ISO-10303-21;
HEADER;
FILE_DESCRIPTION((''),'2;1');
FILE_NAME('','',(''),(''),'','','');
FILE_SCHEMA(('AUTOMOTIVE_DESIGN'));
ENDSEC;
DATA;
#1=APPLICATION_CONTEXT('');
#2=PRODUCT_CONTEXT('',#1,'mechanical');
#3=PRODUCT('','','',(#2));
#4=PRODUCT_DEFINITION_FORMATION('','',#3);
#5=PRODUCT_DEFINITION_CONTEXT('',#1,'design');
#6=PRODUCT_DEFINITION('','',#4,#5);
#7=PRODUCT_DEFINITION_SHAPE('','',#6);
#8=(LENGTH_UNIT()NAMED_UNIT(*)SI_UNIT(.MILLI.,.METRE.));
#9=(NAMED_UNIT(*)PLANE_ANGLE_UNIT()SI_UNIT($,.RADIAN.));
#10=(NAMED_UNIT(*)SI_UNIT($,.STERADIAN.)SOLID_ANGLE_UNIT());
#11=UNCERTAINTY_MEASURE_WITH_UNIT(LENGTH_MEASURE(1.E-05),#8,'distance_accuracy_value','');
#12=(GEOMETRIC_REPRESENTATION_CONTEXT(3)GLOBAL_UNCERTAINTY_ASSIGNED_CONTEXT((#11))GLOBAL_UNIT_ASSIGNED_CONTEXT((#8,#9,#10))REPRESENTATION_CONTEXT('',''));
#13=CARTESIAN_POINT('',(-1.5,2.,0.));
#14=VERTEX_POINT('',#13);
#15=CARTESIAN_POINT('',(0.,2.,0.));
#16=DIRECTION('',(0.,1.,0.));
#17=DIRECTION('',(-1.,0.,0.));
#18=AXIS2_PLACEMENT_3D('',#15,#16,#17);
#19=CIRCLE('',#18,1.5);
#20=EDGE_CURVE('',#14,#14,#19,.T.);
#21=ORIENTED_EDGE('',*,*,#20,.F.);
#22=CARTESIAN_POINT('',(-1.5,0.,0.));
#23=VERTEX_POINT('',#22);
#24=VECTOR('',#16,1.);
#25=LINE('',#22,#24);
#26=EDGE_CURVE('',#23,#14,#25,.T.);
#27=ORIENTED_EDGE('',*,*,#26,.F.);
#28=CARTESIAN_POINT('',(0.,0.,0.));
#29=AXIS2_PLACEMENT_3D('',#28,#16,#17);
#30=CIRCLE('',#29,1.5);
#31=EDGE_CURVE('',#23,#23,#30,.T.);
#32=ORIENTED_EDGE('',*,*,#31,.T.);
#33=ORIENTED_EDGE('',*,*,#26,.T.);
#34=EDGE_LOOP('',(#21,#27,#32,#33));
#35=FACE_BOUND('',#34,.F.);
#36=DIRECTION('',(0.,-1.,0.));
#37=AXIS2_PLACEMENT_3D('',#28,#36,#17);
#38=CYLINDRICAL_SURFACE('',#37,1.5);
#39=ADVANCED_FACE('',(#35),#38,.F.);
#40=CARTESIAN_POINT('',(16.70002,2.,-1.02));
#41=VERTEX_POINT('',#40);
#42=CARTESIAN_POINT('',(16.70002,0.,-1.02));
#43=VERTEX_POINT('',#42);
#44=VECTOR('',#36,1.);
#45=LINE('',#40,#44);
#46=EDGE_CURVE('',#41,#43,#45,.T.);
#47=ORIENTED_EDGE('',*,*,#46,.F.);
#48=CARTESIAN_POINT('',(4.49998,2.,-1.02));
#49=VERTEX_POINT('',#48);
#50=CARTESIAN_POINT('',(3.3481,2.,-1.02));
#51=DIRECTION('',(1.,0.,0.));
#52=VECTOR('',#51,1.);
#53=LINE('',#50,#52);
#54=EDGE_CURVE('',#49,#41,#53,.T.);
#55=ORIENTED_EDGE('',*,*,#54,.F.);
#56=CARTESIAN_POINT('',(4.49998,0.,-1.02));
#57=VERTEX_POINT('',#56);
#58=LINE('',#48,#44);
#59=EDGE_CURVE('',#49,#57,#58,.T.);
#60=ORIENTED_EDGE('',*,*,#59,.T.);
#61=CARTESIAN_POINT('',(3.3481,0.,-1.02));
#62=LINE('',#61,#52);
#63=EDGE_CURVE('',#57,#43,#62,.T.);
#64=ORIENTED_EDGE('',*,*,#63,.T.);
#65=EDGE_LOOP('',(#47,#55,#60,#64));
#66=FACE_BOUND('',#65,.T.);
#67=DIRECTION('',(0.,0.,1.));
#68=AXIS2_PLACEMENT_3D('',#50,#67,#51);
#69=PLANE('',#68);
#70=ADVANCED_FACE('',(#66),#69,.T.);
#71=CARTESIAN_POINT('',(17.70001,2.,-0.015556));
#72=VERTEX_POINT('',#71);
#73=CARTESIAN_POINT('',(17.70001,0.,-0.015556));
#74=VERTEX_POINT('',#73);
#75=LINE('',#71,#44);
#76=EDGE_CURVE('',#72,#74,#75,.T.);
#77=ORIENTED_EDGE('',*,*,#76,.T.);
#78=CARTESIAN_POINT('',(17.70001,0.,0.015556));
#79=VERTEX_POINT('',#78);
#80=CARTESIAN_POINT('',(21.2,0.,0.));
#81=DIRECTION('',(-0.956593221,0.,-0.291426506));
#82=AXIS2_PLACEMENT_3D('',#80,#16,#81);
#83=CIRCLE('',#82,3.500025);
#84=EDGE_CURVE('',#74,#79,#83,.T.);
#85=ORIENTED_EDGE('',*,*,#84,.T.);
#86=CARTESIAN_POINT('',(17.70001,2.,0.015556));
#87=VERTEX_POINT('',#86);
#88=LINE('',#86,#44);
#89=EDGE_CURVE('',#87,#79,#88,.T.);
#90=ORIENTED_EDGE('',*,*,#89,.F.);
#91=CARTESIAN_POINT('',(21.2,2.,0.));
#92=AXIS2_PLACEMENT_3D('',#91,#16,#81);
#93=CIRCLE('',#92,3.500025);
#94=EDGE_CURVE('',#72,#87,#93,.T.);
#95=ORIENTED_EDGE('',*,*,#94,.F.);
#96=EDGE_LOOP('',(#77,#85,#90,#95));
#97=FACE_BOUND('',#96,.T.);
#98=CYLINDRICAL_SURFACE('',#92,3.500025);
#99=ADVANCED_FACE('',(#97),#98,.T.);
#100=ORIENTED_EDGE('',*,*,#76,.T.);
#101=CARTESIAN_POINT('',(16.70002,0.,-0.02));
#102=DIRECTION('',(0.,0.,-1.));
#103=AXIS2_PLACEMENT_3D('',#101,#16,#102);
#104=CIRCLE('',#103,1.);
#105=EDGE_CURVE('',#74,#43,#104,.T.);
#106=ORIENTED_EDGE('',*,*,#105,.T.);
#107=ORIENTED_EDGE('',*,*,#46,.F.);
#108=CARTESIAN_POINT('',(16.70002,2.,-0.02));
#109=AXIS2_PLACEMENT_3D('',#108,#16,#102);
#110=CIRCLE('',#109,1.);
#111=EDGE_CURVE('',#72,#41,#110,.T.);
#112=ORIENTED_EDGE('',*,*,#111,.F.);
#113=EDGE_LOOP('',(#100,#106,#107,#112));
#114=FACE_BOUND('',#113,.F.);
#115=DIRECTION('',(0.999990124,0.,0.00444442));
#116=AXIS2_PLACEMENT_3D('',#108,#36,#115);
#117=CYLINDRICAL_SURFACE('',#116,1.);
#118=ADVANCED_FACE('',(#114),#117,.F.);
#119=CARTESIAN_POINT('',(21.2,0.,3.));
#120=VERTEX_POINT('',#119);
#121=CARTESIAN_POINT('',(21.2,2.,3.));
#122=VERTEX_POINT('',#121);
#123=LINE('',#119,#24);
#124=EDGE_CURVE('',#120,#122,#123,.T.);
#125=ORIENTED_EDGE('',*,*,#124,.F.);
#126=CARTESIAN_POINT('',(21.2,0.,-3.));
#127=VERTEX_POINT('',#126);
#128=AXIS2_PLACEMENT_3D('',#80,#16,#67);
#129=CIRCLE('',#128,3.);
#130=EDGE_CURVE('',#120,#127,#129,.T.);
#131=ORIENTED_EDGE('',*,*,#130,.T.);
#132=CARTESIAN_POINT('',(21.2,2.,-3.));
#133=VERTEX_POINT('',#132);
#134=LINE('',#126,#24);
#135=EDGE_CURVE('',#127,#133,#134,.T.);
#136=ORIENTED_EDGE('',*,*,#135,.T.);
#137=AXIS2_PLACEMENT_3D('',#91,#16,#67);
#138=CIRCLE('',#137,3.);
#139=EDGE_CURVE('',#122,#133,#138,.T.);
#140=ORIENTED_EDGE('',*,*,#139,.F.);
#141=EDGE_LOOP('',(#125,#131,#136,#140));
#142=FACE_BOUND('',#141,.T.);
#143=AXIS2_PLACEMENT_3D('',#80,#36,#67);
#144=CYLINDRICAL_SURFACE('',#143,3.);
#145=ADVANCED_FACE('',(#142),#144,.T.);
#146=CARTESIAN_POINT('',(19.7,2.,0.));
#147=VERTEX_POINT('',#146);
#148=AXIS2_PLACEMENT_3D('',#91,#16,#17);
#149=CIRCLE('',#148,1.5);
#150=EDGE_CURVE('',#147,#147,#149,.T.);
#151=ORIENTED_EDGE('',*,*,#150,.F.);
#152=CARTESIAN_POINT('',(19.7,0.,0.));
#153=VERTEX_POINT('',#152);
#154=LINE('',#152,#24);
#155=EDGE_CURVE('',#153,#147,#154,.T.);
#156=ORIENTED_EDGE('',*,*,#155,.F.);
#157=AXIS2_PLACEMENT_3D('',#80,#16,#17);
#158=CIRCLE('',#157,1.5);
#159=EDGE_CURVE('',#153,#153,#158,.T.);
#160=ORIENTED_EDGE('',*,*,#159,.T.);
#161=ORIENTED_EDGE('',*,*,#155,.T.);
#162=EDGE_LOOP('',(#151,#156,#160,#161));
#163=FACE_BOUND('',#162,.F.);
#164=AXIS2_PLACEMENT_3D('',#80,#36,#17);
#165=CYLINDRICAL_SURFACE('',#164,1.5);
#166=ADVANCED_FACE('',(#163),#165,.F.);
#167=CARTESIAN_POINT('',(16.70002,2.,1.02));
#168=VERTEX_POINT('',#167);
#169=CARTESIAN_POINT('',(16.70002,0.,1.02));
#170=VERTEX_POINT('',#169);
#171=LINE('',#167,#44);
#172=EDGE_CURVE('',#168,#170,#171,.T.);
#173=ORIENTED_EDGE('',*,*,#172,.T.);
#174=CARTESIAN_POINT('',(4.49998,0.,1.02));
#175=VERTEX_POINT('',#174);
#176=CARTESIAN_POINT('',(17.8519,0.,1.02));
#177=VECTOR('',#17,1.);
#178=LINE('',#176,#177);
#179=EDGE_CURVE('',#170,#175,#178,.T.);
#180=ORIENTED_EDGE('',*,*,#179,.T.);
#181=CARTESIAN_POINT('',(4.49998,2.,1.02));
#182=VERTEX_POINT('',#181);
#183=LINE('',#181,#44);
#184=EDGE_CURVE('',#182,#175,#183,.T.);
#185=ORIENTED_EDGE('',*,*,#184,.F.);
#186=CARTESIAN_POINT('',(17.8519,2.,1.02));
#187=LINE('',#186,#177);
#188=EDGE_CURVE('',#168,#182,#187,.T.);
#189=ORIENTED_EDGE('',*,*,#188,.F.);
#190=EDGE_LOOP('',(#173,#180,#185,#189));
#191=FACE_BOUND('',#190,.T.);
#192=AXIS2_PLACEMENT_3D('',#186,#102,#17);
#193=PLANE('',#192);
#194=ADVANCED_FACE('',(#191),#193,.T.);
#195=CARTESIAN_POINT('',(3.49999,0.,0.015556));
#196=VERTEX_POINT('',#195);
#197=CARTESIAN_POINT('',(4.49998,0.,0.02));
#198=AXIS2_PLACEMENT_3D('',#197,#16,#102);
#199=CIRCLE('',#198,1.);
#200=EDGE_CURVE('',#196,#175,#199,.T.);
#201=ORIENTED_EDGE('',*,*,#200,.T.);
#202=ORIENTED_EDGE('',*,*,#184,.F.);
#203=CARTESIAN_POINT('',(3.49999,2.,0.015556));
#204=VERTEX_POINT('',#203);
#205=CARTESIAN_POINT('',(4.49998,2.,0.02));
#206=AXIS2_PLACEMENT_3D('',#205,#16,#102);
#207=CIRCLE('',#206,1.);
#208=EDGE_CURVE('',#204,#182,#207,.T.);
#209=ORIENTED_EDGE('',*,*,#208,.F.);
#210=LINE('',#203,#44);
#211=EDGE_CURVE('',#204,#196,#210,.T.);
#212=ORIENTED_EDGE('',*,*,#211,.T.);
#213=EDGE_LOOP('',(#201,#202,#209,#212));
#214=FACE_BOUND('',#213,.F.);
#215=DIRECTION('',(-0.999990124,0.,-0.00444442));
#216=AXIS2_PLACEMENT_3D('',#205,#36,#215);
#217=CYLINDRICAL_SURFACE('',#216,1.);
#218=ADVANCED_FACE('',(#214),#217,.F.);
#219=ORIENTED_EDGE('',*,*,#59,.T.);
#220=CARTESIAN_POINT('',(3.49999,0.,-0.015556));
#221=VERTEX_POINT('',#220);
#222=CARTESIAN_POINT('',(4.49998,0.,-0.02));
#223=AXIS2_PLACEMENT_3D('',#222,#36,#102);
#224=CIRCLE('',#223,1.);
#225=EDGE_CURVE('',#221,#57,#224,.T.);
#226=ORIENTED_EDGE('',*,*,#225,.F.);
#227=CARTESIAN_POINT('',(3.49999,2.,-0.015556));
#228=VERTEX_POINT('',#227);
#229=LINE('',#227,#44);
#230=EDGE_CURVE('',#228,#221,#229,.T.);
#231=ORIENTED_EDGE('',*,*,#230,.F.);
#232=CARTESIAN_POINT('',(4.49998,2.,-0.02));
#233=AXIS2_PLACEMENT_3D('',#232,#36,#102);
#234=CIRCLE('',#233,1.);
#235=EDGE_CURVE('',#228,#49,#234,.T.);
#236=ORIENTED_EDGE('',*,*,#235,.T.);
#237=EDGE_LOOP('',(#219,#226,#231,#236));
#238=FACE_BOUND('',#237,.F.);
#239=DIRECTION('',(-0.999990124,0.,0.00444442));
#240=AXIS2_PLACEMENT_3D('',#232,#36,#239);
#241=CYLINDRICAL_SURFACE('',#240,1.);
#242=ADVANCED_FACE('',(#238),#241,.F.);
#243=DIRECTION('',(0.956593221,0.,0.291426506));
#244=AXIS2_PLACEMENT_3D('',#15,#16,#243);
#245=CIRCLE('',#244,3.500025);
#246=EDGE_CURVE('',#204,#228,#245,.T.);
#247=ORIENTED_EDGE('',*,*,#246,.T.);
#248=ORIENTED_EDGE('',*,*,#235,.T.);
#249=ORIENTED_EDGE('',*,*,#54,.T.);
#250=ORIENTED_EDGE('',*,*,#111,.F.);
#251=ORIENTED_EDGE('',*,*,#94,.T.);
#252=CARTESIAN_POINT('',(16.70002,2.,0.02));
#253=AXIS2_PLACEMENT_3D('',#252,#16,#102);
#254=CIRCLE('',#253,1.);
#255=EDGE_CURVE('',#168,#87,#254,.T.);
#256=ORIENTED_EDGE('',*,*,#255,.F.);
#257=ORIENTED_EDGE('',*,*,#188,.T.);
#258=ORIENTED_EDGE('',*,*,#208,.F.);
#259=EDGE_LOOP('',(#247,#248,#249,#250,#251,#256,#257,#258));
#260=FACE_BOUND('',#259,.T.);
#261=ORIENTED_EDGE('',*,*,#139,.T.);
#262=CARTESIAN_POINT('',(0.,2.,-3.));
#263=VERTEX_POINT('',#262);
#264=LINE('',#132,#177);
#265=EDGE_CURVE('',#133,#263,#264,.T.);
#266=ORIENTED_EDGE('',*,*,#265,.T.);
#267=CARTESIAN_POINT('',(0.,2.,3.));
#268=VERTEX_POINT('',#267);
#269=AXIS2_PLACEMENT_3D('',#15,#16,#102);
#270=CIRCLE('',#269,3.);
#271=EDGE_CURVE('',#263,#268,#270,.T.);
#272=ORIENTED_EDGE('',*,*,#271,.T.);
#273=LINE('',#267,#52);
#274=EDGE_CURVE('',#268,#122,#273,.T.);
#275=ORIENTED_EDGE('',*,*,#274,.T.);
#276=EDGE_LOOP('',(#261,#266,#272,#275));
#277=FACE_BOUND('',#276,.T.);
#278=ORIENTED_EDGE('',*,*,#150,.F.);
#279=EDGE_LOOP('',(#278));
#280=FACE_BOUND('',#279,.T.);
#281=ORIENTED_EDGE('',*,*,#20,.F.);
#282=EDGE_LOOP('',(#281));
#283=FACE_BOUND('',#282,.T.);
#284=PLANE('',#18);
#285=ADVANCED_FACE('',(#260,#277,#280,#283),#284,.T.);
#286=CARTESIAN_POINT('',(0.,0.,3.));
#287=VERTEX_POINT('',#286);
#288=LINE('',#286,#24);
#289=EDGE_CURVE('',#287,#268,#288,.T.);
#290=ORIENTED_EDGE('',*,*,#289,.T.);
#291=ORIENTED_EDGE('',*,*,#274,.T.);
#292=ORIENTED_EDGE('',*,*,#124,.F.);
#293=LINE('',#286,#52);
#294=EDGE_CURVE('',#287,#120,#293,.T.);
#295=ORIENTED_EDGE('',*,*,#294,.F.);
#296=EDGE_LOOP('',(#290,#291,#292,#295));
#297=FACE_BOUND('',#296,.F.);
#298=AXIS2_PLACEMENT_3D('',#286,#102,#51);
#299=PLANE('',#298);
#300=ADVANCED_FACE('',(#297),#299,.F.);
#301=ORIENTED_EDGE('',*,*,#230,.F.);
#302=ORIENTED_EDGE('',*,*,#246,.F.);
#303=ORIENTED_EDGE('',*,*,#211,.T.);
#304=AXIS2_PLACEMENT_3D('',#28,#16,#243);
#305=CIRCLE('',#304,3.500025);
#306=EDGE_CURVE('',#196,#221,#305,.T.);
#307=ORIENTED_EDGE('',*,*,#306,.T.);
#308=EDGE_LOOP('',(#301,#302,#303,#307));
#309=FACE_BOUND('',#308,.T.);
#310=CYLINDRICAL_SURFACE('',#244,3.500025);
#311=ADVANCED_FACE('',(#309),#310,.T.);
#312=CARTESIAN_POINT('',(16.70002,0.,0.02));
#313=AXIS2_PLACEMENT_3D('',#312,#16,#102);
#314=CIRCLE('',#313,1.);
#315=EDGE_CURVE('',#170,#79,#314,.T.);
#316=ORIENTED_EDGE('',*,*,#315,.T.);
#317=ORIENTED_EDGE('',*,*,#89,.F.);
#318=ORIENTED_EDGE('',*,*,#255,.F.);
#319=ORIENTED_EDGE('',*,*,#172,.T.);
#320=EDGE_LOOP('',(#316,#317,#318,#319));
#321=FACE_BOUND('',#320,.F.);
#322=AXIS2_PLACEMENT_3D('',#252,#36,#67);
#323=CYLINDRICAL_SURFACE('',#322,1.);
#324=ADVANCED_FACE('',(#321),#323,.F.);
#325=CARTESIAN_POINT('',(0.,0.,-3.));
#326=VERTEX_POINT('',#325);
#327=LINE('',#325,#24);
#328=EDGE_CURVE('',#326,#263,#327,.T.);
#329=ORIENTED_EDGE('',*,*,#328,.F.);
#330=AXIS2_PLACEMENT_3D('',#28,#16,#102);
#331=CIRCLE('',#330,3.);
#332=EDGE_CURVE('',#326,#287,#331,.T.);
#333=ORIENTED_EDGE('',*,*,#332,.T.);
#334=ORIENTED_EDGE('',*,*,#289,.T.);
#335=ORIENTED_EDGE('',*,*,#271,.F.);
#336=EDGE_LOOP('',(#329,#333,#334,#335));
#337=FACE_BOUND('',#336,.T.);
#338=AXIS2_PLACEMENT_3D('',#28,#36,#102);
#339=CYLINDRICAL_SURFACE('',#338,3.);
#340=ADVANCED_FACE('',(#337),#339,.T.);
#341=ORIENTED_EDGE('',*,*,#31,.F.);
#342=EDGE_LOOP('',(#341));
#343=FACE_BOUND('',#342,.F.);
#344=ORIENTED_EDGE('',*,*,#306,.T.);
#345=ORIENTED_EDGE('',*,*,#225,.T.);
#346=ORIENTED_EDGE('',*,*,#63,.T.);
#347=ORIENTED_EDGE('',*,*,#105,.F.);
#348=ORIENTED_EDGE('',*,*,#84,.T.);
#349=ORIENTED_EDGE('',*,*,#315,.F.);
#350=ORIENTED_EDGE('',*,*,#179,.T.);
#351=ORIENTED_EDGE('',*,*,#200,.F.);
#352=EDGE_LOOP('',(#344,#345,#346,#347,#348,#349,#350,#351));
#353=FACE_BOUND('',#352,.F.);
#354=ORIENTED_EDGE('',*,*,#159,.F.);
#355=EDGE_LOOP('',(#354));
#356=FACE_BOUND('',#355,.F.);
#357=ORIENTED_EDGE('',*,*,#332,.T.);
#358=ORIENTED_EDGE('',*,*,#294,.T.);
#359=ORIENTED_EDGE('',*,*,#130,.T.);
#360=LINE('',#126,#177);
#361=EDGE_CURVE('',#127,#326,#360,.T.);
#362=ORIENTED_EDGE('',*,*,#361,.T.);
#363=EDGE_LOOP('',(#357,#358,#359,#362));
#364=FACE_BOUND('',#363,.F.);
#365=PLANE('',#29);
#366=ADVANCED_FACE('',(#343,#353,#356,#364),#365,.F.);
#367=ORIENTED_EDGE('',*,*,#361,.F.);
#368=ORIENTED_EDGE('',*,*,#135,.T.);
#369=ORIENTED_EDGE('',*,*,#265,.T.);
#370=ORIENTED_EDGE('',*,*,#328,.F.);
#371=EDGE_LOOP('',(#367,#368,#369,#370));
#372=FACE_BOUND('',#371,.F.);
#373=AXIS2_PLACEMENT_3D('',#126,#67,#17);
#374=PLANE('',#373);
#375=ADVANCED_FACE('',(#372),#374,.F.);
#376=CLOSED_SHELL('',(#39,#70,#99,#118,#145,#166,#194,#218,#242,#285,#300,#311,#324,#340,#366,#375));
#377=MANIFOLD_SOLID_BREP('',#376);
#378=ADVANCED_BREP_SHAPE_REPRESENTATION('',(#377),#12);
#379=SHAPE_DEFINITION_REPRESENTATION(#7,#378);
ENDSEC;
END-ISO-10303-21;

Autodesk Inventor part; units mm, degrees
ref_plane "YZ Plane" through (0, 0, 0) normal (1, 0, 0) x (0, 1, 0)
ref_plane "XZ Plane" through (0, 0, 0) normal (0, 1, 0) x (-1, 0, 0)
ref_plane "XY Plane" through (0, 0, 0) normal (0, 0, 1) x (1, 0, 0)
sketch "スケッチ1" plane through (0, 0, 0) normal (0, 1, 0) x (-1, 0, 0)
  circle A0 centre (0, 0) radius 1.5
  line L0 (0, 0) -> (-21.2, 0) construction
  circle A1 centre (-21.2, 0) radius 1.5
  line L1 (0, 0) -> (-21.2, 0) construction
  line L2 (0, 3) -> (-21.2, 3)
  line L3 (-21.2, -3) -> (0, -3)
  arc A2 (0, -3) -> (0, 3) centre (0, 0) ccw
  arc A3 (-21.2, 3) -> (-21.2, -3) centre (-21.2, 0) ccw
  point P0 (-10.6, 0)
  dimension "d0" = 3
  dimension "d1" = 3
  dimension "d2" = 21.2
  dimension "d3" = 6
extrude "押し出し1" add sketch "スケッチ1" along normal blind 2
sketch "スケッチ2" plane through (0, 2, 0) normal (0, 1, 0) x (1, 0, 0)
  circle A0 centre (21.2, 0) radius 1.5 projected
  circle A1 centre (0, 0) radius 1.5 projected
  line L0 (0, -3) -> (21.2, -3) projected
  arc A2 (21.2, -3) -> (21.2, 3) centre (21.2, 0) ccw projected
  line L1 (21.2, 3) -> (0, 3) projected
  arc A3 (0, 3) -> (0, -3) centre (0, 0) ccw projected
  line L2 (3.3481, 1.02) -> (17.8519, 1.02)
  arc A4 (21.2, -1.5) -> (21.2, 1.5) centre (21.2, 0) ccw
  line L3 (17.8519, -1.02) -> (3.3481, -1.02)
  arc A5 (0, 1.5) -> (0, -1.5) centre (0, 0) ccw
  arc A6 (17.8519, 1.02) -> (17.8519, -1.02) centre (21.2, 0) ccw
  arc A7 (3.3481, -1.02) -> (3.3481, 1.02) centre (0, 0) ccw
  line L4 (0, -3) -> (21.2, -3) projected
  dimension "d8" = 1.98
  dimension "d12" = 1.98
  dimension "d13" = 2
  dimension "d14" = 2
extrude "押し出し2" cut sketch "スケッチ2" against normal blind 2 contours L2 A6 L3 A7
fillet "フィレット1" radius 1 4 edges at (3.3481, 1, 1.02) (3.3481, 1, -1.02) (17.8519, 1, 1.02) (17.8519, 1, -1.02)
properties part number "ウィングおさえ" material "ポリカーボネート、クリア"
